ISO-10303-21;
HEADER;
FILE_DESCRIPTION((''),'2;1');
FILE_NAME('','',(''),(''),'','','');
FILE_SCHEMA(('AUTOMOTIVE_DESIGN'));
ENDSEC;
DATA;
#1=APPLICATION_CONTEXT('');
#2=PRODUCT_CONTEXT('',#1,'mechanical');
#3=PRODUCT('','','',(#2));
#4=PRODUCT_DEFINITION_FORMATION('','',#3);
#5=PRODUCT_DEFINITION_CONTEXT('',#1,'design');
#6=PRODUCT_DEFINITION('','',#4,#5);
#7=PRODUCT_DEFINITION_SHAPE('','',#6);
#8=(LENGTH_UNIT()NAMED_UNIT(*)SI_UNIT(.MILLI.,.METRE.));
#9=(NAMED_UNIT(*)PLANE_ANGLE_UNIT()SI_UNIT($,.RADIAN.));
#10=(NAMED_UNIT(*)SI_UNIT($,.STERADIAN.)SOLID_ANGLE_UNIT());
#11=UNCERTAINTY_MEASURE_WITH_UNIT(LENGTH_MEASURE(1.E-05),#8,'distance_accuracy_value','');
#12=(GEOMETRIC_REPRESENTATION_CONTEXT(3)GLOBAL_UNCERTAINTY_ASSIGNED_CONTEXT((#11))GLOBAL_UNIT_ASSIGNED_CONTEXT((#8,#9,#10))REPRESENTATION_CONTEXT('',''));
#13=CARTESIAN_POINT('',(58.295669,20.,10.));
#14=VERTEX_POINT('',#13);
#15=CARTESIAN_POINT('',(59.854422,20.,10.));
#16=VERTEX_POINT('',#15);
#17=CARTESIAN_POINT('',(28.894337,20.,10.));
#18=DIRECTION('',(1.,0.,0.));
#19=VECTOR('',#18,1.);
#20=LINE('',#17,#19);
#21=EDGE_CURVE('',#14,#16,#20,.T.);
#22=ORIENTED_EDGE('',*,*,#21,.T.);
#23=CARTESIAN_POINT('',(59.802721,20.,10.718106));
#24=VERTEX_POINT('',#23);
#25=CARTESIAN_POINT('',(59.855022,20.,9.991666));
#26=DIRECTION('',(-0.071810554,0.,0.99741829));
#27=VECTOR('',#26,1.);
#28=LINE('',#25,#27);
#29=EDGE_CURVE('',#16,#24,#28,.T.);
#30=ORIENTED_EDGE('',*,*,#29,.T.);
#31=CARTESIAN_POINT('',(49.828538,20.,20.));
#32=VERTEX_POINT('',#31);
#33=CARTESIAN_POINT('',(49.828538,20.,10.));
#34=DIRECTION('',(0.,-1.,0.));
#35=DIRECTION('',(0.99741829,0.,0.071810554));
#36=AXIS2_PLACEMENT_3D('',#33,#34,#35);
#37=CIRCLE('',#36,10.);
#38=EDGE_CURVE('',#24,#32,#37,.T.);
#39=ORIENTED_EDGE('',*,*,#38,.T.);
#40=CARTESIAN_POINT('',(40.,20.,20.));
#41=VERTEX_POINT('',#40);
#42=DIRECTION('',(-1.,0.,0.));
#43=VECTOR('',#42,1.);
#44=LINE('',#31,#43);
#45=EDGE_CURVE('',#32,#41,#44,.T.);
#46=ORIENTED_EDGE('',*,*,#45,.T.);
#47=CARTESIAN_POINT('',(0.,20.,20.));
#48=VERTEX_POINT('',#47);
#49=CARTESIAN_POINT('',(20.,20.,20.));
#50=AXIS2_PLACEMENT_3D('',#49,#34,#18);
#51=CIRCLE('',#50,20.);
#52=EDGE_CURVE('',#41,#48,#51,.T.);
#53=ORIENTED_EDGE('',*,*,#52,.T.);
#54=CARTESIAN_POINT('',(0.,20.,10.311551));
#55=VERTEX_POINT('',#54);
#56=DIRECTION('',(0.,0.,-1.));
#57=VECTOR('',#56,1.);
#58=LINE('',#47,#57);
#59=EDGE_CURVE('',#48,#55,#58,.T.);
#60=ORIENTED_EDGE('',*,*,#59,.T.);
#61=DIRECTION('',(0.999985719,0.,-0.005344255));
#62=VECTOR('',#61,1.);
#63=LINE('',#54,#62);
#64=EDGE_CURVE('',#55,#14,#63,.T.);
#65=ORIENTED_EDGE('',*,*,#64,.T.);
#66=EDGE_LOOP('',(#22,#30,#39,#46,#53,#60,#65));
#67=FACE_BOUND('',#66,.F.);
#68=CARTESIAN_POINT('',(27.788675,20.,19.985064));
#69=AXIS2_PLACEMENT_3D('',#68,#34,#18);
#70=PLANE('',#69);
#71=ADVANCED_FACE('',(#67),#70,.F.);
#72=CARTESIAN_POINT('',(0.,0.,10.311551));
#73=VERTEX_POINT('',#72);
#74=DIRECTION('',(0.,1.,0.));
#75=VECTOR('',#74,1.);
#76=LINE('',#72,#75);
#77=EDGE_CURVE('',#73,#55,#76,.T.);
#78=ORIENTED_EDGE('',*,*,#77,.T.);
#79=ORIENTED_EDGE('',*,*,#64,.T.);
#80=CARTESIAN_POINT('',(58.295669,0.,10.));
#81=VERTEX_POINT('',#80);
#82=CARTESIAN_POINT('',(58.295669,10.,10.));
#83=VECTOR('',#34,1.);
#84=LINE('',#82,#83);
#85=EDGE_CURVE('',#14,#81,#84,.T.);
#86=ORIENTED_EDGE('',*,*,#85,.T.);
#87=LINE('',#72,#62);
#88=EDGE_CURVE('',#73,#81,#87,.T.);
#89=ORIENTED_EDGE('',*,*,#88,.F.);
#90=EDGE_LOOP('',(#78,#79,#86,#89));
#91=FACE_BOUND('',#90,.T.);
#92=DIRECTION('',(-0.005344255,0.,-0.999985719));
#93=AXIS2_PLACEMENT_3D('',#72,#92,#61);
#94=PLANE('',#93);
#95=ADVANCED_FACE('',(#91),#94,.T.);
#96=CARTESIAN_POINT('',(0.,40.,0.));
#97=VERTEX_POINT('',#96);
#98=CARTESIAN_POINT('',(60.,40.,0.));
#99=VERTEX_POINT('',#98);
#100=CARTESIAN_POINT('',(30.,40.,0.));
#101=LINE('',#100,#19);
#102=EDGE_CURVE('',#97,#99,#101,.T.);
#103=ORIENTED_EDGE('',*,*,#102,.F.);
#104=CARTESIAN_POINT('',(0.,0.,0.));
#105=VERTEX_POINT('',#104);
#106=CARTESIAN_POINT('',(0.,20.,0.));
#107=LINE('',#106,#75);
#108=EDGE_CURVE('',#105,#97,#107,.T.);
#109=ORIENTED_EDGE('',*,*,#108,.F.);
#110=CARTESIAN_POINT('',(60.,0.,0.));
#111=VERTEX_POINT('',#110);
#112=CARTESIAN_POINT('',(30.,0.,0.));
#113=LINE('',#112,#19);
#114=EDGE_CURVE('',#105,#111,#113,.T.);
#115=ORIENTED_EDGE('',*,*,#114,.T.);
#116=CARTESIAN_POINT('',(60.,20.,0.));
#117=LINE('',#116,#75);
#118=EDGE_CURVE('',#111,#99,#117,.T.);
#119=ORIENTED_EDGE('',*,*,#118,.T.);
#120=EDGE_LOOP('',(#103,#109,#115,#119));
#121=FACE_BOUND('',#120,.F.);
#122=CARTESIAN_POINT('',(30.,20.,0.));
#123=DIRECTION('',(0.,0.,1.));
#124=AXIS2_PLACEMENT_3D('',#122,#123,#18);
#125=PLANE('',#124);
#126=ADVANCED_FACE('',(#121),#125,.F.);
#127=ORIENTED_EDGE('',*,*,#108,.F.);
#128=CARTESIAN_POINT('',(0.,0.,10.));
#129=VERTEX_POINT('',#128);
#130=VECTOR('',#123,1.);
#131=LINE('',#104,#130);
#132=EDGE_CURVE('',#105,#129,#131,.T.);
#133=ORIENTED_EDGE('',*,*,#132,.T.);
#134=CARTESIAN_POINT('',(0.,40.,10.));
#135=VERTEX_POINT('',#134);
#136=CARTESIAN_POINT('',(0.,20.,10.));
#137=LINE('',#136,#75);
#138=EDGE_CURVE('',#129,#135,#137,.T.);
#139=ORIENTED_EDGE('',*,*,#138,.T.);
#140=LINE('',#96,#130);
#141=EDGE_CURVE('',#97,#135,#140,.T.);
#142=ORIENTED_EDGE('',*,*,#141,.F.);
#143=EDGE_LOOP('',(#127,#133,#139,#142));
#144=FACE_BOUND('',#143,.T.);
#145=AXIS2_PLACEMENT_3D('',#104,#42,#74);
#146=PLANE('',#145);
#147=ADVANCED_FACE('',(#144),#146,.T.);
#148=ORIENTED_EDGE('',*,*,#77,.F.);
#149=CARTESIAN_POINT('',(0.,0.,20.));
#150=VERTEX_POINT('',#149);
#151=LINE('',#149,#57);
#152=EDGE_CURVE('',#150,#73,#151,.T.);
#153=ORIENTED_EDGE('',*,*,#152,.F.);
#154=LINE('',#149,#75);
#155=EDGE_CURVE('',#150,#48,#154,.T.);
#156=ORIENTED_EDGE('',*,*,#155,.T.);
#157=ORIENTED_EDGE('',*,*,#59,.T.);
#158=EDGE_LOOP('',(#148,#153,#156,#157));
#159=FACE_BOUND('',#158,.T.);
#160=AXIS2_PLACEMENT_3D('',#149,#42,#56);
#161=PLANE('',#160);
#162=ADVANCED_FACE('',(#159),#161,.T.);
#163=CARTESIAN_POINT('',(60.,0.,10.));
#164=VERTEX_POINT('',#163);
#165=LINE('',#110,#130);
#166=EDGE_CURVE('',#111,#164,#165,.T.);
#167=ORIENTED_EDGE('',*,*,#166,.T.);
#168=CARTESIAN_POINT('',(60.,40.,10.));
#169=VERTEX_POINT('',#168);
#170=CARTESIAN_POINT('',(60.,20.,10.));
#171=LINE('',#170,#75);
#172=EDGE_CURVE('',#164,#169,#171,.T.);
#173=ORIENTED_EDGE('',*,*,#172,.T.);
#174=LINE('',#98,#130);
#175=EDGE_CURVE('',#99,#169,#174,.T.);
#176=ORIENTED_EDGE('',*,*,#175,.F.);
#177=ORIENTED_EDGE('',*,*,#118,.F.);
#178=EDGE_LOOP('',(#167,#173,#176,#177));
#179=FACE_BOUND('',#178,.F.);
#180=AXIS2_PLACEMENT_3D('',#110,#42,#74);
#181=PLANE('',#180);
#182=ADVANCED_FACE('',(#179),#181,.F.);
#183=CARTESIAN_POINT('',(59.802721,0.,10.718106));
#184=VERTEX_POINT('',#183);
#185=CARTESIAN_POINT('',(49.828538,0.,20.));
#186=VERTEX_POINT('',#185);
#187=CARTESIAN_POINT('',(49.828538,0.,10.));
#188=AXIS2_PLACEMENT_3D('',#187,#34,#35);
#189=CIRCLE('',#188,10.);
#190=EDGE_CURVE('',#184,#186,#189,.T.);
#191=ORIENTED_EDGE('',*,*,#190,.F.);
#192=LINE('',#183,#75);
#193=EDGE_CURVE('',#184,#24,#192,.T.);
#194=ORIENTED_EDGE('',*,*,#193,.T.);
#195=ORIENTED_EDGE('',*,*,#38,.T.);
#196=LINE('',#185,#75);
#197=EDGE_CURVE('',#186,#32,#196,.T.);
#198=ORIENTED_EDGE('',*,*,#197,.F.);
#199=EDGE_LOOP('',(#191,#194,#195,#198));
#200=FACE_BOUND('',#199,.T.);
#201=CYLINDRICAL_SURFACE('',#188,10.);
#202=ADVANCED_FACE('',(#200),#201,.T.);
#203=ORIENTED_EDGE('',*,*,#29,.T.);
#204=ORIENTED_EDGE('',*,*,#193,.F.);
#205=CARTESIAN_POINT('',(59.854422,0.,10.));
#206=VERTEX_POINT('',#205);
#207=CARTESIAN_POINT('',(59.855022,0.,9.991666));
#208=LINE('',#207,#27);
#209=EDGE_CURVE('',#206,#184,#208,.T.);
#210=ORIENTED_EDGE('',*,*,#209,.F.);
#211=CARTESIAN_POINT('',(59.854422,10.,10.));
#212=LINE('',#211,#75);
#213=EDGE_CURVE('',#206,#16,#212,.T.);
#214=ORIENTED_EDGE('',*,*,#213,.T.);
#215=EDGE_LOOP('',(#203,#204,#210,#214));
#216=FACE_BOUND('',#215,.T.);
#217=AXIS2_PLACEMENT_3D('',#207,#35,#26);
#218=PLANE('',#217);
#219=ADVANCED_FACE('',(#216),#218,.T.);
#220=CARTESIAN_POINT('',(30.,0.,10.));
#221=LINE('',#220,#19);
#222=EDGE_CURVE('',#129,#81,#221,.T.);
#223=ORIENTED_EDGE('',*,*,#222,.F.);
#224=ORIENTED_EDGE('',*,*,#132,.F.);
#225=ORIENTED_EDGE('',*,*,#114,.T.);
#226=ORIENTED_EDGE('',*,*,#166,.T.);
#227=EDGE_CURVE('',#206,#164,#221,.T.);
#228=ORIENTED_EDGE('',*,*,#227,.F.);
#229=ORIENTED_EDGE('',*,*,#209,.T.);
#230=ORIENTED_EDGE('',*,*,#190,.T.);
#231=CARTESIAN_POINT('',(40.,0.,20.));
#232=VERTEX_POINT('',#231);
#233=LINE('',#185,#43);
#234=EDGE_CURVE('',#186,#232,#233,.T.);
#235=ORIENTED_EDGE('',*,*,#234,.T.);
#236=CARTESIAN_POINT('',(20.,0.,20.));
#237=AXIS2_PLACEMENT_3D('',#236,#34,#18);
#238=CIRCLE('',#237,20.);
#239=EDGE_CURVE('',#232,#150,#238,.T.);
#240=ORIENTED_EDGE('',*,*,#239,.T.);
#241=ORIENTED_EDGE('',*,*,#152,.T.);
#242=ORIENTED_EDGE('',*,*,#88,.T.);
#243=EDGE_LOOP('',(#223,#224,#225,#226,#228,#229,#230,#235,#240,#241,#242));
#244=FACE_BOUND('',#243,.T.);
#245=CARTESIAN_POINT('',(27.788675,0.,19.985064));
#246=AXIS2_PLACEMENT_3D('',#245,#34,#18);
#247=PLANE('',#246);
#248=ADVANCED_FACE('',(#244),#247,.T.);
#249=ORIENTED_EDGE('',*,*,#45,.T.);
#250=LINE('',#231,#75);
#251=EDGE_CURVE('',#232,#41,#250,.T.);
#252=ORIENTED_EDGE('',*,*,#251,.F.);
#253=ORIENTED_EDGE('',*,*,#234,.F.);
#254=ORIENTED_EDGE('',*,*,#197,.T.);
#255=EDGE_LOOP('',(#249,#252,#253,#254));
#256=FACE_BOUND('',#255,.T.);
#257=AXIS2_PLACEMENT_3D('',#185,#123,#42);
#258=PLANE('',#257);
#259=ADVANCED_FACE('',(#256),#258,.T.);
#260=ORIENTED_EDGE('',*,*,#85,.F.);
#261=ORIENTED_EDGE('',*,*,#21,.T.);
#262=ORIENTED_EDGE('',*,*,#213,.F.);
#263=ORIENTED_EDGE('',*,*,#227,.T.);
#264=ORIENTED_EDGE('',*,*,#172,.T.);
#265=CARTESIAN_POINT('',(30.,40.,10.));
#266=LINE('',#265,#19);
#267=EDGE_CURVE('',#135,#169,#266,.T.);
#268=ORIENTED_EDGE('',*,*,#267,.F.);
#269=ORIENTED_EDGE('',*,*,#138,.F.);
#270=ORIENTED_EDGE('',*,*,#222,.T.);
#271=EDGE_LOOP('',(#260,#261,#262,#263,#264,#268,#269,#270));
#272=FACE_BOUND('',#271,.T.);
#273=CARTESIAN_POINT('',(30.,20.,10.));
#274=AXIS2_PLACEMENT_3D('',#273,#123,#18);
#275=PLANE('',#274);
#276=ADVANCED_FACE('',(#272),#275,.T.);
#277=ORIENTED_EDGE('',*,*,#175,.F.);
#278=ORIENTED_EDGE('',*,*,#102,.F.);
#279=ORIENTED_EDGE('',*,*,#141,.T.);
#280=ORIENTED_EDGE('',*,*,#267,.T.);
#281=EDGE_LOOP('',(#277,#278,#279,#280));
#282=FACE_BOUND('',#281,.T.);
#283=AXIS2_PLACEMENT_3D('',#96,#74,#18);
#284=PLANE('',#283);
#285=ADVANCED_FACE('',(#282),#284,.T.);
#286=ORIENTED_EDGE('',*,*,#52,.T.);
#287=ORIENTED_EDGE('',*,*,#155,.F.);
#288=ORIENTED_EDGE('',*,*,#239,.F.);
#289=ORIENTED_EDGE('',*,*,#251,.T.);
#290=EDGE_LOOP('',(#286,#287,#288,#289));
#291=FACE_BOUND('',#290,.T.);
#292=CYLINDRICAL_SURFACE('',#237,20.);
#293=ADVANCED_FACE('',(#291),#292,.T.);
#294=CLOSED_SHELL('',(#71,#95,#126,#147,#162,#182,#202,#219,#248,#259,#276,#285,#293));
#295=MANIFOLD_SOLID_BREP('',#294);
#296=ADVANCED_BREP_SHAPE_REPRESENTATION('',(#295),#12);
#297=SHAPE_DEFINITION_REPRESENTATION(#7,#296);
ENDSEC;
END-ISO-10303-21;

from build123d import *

# Parameters (mm, degrees)
F0_W     = 60
F0_H     = 40
F1_DEPTH = 10
F5_DEPTH = 20


# Not quite as in the source:
# - a feature of the source that left no trace in its solid (it failed there, or was rolled back) is left out


with BuildPart() as f1:
    # F0 (on Top) → F1 (new body)
    with BuildSketch(Plane.XY):
        with Locations((30, 20)):
            Rectangle(F0_W, F0_H)
    extrude(amount=F1_DEPTH)

    # F2 (on Front) → F5 (join)
    with BuildSketch(Plane.XZ):
        with BuildLine():
            Line((49.8285376106, 20), (40, 20))
            ThreePointArc((40, 20), (20, 40), (0, 20))
            Line((0, 20), (0, 10.3115513921))
            Line((0, 10.3115513921), (59.8550215364, 9.9916663021))
            Line((59.8550215364, 9.9916663021), (59.8027205061, 10.7181055402))
            ThreePointArc((59.8027205061, 10.7181055402), (56.6409874121, 17.3205551498), (49.8285376106, 20))
        make_face()
    extrude(amount=-F5_DEPTH)


solid = f1.part
